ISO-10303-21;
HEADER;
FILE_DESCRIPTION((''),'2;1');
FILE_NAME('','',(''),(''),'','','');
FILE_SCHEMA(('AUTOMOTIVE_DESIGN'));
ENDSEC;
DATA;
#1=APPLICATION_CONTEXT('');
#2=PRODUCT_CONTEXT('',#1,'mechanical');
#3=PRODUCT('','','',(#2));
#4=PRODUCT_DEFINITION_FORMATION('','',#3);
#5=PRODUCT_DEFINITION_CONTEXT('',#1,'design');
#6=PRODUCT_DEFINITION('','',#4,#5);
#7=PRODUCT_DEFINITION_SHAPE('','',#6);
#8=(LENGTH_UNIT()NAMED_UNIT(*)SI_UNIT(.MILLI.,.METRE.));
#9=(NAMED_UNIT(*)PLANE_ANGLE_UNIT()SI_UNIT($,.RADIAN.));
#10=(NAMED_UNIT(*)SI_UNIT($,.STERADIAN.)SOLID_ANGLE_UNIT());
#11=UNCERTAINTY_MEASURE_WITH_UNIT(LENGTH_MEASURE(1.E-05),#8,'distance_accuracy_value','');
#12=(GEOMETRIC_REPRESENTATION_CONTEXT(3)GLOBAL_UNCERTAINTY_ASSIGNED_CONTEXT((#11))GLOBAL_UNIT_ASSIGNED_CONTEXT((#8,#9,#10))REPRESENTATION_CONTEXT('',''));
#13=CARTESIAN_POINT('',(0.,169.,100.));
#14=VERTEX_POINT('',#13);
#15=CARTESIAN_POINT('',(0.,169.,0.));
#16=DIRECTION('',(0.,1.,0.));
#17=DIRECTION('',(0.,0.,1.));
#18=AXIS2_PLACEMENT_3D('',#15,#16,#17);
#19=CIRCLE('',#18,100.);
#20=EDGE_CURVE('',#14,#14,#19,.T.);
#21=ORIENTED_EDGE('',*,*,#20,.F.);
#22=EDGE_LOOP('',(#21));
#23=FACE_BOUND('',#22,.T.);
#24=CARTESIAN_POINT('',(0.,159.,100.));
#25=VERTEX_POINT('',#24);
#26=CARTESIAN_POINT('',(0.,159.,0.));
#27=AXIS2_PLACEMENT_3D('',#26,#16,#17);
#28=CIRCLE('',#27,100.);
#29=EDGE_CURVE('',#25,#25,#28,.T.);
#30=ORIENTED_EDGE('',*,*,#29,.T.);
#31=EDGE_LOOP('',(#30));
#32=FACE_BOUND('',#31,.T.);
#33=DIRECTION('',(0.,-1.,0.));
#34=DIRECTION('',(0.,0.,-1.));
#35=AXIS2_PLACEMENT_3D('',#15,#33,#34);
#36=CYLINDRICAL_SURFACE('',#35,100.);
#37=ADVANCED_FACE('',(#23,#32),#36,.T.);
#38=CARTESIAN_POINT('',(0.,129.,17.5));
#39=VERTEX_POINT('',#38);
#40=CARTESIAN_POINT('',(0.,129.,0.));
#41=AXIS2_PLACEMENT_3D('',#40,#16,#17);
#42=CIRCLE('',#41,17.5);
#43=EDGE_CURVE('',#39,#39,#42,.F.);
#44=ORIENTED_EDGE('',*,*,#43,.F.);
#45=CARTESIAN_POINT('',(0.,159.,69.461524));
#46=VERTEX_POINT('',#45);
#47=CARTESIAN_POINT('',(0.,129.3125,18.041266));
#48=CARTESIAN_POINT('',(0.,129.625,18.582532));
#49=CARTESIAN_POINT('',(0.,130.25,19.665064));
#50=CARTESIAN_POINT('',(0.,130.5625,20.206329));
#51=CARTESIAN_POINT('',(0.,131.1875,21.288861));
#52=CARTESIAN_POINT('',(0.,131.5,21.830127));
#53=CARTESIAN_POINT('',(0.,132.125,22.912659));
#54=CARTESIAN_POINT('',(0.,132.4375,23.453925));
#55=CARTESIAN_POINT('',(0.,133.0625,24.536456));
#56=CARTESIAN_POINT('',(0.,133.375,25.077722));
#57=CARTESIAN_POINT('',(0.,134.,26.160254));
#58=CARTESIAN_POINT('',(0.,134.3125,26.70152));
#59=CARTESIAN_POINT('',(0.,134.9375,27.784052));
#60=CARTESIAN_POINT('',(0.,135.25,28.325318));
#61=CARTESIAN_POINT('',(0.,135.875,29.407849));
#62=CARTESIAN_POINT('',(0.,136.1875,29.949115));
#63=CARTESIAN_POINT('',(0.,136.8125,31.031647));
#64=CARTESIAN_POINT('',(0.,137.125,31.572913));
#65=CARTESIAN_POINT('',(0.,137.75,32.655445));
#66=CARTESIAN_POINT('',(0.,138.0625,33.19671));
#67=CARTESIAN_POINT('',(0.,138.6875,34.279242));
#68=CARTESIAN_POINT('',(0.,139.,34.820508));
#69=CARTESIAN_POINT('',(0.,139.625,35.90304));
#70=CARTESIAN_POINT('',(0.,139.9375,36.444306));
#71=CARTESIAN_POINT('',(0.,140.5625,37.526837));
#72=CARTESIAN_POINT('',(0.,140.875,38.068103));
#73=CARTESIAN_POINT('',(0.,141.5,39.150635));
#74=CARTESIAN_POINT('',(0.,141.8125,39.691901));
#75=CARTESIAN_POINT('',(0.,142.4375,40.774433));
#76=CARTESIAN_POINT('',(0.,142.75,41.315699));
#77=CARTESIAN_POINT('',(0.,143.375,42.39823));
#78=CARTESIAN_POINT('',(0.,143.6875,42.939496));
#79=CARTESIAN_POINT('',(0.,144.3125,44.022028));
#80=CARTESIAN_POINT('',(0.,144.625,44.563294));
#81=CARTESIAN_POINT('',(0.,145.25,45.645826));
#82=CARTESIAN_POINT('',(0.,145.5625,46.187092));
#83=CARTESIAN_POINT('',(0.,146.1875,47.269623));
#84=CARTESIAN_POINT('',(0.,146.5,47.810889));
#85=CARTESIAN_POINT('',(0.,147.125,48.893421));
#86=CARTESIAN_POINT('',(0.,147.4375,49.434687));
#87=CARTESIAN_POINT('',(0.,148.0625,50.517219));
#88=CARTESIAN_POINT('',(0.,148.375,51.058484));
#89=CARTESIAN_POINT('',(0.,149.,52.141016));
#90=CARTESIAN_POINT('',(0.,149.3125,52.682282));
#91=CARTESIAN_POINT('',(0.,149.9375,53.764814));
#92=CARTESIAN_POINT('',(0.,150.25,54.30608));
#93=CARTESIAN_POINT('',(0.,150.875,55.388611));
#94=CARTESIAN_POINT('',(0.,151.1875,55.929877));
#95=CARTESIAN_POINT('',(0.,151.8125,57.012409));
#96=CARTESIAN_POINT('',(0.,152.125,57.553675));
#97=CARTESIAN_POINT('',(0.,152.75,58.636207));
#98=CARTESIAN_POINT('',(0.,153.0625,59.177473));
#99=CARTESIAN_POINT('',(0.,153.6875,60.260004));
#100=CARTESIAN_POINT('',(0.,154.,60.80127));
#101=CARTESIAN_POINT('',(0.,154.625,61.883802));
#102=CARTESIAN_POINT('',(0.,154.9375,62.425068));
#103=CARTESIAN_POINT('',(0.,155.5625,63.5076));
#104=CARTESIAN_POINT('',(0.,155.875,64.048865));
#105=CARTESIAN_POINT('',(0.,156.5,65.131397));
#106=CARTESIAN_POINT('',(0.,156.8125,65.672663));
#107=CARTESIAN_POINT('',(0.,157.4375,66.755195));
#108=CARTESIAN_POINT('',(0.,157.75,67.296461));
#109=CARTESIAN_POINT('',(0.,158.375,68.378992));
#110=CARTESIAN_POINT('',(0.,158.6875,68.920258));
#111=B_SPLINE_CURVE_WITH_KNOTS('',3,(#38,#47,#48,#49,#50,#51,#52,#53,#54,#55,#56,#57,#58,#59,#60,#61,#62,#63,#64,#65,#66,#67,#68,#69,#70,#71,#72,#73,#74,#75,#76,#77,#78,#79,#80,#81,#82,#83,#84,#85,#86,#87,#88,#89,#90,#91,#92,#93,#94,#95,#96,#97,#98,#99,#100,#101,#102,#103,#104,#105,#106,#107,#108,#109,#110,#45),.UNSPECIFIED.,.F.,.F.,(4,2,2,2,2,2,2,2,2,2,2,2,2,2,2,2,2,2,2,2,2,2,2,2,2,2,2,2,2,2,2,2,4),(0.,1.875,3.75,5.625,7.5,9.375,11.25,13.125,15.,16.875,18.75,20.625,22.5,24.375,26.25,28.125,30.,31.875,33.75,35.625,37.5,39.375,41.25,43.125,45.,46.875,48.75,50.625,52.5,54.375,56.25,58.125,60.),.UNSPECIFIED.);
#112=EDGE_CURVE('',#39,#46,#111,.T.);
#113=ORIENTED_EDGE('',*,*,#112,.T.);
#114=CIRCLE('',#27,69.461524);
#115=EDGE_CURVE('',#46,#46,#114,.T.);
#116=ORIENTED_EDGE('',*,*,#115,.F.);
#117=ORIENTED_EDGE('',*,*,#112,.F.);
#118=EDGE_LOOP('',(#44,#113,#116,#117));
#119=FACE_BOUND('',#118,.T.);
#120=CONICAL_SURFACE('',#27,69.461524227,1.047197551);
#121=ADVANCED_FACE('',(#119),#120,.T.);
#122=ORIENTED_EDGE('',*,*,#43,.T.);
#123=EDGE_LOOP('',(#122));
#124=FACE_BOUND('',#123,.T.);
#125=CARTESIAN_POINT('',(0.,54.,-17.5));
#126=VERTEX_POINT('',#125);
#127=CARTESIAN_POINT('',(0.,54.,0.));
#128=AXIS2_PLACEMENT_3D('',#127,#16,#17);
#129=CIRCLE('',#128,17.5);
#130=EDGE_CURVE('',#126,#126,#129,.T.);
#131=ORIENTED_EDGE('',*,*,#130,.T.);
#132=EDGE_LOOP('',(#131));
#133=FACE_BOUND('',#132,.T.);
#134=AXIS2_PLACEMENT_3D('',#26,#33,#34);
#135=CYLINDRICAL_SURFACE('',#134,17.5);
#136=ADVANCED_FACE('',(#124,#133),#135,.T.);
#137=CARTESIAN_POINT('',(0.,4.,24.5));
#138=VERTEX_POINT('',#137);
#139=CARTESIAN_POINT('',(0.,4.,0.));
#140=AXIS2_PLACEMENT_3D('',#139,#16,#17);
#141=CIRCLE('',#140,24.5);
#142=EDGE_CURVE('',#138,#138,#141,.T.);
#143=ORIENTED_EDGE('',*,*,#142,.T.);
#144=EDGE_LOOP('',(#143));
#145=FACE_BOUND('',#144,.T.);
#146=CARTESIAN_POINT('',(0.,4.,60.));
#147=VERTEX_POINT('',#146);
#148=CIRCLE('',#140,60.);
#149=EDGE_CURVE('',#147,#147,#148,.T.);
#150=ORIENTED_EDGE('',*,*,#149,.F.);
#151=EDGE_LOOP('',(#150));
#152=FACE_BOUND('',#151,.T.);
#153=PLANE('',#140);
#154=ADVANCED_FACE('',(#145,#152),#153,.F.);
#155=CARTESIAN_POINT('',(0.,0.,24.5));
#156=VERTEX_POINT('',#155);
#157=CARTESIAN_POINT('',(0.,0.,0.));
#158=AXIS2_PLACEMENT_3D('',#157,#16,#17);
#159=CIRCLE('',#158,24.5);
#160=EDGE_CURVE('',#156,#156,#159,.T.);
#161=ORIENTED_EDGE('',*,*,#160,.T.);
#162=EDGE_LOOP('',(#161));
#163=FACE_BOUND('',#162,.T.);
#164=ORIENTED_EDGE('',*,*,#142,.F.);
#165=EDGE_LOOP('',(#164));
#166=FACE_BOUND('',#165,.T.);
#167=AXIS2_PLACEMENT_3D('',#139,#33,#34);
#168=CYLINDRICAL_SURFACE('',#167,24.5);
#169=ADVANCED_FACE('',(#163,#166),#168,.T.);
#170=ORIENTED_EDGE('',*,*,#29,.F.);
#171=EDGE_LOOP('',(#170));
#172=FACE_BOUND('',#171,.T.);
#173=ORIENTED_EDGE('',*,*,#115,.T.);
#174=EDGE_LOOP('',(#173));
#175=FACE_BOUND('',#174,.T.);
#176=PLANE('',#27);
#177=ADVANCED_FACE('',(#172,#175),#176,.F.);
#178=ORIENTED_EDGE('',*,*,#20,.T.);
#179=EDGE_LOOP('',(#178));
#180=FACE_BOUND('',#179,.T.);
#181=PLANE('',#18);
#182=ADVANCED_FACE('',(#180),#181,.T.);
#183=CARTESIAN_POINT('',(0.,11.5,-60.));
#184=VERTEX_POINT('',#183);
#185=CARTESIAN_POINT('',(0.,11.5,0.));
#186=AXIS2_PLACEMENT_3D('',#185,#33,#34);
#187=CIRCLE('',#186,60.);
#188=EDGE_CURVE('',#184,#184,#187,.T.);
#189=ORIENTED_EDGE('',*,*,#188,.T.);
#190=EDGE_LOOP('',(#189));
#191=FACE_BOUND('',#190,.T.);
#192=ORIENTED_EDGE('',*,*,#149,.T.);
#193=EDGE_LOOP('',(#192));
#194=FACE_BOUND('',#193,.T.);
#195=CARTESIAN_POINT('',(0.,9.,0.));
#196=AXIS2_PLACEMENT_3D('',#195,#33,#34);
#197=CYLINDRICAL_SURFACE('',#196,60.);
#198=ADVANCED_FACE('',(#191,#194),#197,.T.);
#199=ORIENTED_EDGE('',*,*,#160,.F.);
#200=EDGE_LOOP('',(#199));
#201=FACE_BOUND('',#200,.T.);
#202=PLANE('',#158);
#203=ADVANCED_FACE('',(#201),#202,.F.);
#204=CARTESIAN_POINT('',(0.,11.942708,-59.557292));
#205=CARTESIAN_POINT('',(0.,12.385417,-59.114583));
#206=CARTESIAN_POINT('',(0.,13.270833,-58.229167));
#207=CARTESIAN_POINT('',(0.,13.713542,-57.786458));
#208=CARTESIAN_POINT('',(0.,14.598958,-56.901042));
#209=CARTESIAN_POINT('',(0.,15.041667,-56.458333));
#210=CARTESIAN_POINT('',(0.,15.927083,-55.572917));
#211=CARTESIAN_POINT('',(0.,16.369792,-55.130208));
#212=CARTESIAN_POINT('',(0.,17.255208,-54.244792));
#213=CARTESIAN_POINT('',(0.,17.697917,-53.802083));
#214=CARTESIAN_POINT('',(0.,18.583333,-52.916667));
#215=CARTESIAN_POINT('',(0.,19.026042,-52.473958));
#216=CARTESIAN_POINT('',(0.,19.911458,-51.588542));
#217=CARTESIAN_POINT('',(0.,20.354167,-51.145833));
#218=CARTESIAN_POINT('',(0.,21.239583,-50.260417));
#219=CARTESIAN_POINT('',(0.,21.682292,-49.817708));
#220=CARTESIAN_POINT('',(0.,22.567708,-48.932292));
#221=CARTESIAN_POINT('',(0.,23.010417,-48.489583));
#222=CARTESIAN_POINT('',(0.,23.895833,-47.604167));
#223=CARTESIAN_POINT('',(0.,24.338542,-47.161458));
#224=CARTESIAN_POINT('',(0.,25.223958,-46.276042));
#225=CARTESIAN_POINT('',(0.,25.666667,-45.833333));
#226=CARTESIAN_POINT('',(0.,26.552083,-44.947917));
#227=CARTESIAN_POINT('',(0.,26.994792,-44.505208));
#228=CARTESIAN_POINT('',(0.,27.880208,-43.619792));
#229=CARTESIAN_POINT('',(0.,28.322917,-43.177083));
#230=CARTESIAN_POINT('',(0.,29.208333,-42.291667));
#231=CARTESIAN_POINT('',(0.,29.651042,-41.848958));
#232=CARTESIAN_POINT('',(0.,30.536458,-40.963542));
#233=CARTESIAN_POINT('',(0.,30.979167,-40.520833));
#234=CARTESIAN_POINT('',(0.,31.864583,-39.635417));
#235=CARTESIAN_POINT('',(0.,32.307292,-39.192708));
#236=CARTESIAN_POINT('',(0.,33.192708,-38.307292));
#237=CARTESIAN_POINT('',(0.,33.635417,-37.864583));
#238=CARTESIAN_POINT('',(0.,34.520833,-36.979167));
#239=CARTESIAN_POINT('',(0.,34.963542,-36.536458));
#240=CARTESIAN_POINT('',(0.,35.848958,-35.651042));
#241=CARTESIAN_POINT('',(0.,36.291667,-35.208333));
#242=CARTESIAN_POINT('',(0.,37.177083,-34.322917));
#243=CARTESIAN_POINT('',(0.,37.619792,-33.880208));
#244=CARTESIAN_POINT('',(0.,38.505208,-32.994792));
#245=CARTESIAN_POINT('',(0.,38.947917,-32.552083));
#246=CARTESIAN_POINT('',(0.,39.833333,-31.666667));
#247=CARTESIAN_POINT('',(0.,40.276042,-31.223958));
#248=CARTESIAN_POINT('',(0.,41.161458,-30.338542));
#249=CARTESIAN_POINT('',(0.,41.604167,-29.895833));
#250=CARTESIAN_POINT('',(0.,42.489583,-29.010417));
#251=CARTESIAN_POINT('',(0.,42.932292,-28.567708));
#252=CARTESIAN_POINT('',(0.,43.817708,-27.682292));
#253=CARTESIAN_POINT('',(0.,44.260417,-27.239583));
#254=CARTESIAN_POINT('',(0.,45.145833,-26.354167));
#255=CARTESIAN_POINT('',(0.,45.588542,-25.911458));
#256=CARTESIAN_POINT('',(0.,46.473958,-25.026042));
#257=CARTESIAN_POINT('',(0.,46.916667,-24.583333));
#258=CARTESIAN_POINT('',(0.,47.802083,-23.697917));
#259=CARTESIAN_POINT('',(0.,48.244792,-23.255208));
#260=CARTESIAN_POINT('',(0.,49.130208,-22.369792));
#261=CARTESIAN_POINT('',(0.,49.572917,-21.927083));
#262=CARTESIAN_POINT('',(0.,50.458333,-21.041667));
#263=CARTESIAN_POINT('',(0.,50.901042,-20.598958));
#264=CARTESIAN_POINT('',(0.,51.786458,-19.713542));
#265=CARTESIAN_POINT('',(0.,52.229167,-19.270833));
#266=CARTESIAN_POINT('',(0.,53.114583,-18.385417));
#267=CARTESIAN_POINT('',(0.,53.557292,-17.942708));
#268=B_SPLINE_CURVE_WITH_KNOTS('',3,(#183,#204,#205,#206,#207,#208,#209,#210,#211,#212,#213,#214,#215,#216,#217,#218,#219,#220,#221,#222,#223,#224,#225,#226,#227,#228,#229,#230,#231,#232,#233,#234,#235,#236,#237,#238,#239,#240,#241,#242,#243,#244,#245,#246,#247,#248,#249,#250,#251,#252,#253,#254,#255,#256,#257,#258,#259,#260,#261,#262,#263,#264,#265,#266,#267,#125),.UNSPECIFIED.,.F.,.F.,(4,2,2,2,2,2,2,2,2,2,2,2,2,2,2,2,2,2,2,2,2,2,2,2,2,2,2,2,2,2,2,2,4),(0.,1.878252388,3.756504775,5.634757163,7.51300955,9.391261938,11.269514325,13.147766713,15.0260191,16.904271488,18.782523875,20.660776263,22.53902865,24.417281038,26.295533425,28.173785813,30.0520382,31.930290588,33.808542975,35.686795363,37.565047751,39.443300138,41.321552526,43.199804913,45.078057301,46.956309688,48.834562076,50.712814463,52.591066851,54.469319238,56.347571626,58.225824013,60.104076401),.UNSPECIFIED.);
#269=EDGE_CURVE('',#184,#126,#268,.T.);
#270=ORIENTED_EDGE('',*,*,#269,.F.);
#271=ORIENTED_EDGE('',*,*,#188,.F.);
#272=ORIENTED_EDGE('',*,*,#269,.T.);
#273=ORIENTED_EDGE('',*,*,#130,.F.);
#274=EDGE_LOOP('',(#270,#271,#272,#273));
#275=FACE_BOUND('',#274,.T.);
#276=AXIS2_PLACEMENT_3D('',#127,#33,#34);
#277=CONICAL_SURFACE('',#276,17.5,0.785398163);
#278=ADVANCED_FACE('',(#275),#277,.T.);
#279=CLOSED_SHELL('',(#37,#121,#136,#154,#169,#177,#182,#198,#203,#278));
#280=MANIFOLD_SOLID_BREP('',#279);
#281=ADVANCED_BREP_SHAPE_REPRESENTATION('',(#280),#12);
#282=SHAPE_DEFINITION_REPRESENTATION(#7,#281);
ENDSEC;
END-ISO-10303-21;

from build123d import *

# Parameters (mm, degrees)
SKETCH_1_R      = 24.5
EXTRUDE_1_DEPTH = 4
SKETCH_Q_R      = 60
EXTRUDE_2_DEPTH = 5
SKETCH_3_R      = 17.5
EXTRUDE_3_DEPTH = 150
SKETCH_4_R      = 100
EXTRUDE_4_DEPTH = 10
CHAMFER_1_SIZE  = 45
CHAMFER_2_SIZE  = 30
CHAMFER_2_SIZE2 = 51.961524227


with BuildPart() as part:
    # 草图1 → 凸台-拉伸1 (new body)
    with BuildSketch(Plane(origin=(0, 0, 0), x_dir=(1, 0, 0), z_dir=(0, 1, 0))):
        with Locations(Location((0, 0, 0), (0, 0, 270))):
            Circle(SKETCH_1_R)
    extrude(amount=EXTRUDE_1_DEPTH)

    # q → 凸台-拉伸2 (add)
    with BuildSketch(Plane(origin=(0, 4, 0), x_dir=(1, 0, 0), z_dir=(0, 1, 0))):
        with Locations(Location((0, 0, 0), (0, 0, 270))):
            Circle(SKETCH_Q_R)
    extrude(amount=EXTRUDE_2_DEPTH)

    # 草图3 → 凸台-拉伸3 (add)
    with BuildSketch(Plane(origin=(0, 9, 0), x_dir=(1, 0, 0), z_dir=(0, 1, 0))):
        with Locations(Location((0, 0, 0), (0, 0, 270))):
            Circle(SKETCH_3_R)
    extrude(amount=EXTRUDE_3_DEPTH)

    # 草图4 → 凸台-拉伸4 (add)
    with BuildSketch(Plane(origin=(0, 159, 0), x_dir=(1, 0, 0), z_dir=(0, 1, 0))):
        with Locations(Location((0, 0, 0), (0, 0, 270))):
            Circle(SKETCH_4_R)
    extrude(amount=EXTRUDE_4_DEPTH)

    # 倒角1
    # the kernel refuses this chamfer: 45 mm, written as the material it adds along each edge
    with BuildSketch(Plane(origin=(0, 9, 0), x_dir=(0, 0, 1), z_dir=(-1, 0, 0))) as chamfer_1_piece_1_section:
        Polygon((17.5, CHAMFER_1_SIZE), (17.5 + CHAMFER_1_SIZE, 0), (17.5, 0), align=None)
    chamfer_1_piece_1 = revolve(axis=Axis((0, 9, 0), (0, 1, 0)), mode=Mode.PRIVATE)
    chamfer_1_piece_1 = chamfer_1_piece_1 & Plane(origin=(0, 32.95787502, 0), x_dir=(0, 0, 1), z_dir=(0, -1, 0)) * Cylinder(60, 250, mode=Mode.PRIVATE)
    add(chamfer_1_piece_1)

    # 倒角2
    chamfer_2_edges = [part.edges().sort_by_distance(p)[0] for p in [
        (0, 159, -17.5),
    ]]
    chamfer_2_side = [part.faces().sort_by_distance(p)[0] for p in [
        (0, 106.5, -17.5),
    ]]
    chamfer(chamfer_2_edges, length=CHAMFER_2_SIZE, length2=CHAMFER_2_SIZE2, reference=chamfer_2_side[0])


solid = part.part
